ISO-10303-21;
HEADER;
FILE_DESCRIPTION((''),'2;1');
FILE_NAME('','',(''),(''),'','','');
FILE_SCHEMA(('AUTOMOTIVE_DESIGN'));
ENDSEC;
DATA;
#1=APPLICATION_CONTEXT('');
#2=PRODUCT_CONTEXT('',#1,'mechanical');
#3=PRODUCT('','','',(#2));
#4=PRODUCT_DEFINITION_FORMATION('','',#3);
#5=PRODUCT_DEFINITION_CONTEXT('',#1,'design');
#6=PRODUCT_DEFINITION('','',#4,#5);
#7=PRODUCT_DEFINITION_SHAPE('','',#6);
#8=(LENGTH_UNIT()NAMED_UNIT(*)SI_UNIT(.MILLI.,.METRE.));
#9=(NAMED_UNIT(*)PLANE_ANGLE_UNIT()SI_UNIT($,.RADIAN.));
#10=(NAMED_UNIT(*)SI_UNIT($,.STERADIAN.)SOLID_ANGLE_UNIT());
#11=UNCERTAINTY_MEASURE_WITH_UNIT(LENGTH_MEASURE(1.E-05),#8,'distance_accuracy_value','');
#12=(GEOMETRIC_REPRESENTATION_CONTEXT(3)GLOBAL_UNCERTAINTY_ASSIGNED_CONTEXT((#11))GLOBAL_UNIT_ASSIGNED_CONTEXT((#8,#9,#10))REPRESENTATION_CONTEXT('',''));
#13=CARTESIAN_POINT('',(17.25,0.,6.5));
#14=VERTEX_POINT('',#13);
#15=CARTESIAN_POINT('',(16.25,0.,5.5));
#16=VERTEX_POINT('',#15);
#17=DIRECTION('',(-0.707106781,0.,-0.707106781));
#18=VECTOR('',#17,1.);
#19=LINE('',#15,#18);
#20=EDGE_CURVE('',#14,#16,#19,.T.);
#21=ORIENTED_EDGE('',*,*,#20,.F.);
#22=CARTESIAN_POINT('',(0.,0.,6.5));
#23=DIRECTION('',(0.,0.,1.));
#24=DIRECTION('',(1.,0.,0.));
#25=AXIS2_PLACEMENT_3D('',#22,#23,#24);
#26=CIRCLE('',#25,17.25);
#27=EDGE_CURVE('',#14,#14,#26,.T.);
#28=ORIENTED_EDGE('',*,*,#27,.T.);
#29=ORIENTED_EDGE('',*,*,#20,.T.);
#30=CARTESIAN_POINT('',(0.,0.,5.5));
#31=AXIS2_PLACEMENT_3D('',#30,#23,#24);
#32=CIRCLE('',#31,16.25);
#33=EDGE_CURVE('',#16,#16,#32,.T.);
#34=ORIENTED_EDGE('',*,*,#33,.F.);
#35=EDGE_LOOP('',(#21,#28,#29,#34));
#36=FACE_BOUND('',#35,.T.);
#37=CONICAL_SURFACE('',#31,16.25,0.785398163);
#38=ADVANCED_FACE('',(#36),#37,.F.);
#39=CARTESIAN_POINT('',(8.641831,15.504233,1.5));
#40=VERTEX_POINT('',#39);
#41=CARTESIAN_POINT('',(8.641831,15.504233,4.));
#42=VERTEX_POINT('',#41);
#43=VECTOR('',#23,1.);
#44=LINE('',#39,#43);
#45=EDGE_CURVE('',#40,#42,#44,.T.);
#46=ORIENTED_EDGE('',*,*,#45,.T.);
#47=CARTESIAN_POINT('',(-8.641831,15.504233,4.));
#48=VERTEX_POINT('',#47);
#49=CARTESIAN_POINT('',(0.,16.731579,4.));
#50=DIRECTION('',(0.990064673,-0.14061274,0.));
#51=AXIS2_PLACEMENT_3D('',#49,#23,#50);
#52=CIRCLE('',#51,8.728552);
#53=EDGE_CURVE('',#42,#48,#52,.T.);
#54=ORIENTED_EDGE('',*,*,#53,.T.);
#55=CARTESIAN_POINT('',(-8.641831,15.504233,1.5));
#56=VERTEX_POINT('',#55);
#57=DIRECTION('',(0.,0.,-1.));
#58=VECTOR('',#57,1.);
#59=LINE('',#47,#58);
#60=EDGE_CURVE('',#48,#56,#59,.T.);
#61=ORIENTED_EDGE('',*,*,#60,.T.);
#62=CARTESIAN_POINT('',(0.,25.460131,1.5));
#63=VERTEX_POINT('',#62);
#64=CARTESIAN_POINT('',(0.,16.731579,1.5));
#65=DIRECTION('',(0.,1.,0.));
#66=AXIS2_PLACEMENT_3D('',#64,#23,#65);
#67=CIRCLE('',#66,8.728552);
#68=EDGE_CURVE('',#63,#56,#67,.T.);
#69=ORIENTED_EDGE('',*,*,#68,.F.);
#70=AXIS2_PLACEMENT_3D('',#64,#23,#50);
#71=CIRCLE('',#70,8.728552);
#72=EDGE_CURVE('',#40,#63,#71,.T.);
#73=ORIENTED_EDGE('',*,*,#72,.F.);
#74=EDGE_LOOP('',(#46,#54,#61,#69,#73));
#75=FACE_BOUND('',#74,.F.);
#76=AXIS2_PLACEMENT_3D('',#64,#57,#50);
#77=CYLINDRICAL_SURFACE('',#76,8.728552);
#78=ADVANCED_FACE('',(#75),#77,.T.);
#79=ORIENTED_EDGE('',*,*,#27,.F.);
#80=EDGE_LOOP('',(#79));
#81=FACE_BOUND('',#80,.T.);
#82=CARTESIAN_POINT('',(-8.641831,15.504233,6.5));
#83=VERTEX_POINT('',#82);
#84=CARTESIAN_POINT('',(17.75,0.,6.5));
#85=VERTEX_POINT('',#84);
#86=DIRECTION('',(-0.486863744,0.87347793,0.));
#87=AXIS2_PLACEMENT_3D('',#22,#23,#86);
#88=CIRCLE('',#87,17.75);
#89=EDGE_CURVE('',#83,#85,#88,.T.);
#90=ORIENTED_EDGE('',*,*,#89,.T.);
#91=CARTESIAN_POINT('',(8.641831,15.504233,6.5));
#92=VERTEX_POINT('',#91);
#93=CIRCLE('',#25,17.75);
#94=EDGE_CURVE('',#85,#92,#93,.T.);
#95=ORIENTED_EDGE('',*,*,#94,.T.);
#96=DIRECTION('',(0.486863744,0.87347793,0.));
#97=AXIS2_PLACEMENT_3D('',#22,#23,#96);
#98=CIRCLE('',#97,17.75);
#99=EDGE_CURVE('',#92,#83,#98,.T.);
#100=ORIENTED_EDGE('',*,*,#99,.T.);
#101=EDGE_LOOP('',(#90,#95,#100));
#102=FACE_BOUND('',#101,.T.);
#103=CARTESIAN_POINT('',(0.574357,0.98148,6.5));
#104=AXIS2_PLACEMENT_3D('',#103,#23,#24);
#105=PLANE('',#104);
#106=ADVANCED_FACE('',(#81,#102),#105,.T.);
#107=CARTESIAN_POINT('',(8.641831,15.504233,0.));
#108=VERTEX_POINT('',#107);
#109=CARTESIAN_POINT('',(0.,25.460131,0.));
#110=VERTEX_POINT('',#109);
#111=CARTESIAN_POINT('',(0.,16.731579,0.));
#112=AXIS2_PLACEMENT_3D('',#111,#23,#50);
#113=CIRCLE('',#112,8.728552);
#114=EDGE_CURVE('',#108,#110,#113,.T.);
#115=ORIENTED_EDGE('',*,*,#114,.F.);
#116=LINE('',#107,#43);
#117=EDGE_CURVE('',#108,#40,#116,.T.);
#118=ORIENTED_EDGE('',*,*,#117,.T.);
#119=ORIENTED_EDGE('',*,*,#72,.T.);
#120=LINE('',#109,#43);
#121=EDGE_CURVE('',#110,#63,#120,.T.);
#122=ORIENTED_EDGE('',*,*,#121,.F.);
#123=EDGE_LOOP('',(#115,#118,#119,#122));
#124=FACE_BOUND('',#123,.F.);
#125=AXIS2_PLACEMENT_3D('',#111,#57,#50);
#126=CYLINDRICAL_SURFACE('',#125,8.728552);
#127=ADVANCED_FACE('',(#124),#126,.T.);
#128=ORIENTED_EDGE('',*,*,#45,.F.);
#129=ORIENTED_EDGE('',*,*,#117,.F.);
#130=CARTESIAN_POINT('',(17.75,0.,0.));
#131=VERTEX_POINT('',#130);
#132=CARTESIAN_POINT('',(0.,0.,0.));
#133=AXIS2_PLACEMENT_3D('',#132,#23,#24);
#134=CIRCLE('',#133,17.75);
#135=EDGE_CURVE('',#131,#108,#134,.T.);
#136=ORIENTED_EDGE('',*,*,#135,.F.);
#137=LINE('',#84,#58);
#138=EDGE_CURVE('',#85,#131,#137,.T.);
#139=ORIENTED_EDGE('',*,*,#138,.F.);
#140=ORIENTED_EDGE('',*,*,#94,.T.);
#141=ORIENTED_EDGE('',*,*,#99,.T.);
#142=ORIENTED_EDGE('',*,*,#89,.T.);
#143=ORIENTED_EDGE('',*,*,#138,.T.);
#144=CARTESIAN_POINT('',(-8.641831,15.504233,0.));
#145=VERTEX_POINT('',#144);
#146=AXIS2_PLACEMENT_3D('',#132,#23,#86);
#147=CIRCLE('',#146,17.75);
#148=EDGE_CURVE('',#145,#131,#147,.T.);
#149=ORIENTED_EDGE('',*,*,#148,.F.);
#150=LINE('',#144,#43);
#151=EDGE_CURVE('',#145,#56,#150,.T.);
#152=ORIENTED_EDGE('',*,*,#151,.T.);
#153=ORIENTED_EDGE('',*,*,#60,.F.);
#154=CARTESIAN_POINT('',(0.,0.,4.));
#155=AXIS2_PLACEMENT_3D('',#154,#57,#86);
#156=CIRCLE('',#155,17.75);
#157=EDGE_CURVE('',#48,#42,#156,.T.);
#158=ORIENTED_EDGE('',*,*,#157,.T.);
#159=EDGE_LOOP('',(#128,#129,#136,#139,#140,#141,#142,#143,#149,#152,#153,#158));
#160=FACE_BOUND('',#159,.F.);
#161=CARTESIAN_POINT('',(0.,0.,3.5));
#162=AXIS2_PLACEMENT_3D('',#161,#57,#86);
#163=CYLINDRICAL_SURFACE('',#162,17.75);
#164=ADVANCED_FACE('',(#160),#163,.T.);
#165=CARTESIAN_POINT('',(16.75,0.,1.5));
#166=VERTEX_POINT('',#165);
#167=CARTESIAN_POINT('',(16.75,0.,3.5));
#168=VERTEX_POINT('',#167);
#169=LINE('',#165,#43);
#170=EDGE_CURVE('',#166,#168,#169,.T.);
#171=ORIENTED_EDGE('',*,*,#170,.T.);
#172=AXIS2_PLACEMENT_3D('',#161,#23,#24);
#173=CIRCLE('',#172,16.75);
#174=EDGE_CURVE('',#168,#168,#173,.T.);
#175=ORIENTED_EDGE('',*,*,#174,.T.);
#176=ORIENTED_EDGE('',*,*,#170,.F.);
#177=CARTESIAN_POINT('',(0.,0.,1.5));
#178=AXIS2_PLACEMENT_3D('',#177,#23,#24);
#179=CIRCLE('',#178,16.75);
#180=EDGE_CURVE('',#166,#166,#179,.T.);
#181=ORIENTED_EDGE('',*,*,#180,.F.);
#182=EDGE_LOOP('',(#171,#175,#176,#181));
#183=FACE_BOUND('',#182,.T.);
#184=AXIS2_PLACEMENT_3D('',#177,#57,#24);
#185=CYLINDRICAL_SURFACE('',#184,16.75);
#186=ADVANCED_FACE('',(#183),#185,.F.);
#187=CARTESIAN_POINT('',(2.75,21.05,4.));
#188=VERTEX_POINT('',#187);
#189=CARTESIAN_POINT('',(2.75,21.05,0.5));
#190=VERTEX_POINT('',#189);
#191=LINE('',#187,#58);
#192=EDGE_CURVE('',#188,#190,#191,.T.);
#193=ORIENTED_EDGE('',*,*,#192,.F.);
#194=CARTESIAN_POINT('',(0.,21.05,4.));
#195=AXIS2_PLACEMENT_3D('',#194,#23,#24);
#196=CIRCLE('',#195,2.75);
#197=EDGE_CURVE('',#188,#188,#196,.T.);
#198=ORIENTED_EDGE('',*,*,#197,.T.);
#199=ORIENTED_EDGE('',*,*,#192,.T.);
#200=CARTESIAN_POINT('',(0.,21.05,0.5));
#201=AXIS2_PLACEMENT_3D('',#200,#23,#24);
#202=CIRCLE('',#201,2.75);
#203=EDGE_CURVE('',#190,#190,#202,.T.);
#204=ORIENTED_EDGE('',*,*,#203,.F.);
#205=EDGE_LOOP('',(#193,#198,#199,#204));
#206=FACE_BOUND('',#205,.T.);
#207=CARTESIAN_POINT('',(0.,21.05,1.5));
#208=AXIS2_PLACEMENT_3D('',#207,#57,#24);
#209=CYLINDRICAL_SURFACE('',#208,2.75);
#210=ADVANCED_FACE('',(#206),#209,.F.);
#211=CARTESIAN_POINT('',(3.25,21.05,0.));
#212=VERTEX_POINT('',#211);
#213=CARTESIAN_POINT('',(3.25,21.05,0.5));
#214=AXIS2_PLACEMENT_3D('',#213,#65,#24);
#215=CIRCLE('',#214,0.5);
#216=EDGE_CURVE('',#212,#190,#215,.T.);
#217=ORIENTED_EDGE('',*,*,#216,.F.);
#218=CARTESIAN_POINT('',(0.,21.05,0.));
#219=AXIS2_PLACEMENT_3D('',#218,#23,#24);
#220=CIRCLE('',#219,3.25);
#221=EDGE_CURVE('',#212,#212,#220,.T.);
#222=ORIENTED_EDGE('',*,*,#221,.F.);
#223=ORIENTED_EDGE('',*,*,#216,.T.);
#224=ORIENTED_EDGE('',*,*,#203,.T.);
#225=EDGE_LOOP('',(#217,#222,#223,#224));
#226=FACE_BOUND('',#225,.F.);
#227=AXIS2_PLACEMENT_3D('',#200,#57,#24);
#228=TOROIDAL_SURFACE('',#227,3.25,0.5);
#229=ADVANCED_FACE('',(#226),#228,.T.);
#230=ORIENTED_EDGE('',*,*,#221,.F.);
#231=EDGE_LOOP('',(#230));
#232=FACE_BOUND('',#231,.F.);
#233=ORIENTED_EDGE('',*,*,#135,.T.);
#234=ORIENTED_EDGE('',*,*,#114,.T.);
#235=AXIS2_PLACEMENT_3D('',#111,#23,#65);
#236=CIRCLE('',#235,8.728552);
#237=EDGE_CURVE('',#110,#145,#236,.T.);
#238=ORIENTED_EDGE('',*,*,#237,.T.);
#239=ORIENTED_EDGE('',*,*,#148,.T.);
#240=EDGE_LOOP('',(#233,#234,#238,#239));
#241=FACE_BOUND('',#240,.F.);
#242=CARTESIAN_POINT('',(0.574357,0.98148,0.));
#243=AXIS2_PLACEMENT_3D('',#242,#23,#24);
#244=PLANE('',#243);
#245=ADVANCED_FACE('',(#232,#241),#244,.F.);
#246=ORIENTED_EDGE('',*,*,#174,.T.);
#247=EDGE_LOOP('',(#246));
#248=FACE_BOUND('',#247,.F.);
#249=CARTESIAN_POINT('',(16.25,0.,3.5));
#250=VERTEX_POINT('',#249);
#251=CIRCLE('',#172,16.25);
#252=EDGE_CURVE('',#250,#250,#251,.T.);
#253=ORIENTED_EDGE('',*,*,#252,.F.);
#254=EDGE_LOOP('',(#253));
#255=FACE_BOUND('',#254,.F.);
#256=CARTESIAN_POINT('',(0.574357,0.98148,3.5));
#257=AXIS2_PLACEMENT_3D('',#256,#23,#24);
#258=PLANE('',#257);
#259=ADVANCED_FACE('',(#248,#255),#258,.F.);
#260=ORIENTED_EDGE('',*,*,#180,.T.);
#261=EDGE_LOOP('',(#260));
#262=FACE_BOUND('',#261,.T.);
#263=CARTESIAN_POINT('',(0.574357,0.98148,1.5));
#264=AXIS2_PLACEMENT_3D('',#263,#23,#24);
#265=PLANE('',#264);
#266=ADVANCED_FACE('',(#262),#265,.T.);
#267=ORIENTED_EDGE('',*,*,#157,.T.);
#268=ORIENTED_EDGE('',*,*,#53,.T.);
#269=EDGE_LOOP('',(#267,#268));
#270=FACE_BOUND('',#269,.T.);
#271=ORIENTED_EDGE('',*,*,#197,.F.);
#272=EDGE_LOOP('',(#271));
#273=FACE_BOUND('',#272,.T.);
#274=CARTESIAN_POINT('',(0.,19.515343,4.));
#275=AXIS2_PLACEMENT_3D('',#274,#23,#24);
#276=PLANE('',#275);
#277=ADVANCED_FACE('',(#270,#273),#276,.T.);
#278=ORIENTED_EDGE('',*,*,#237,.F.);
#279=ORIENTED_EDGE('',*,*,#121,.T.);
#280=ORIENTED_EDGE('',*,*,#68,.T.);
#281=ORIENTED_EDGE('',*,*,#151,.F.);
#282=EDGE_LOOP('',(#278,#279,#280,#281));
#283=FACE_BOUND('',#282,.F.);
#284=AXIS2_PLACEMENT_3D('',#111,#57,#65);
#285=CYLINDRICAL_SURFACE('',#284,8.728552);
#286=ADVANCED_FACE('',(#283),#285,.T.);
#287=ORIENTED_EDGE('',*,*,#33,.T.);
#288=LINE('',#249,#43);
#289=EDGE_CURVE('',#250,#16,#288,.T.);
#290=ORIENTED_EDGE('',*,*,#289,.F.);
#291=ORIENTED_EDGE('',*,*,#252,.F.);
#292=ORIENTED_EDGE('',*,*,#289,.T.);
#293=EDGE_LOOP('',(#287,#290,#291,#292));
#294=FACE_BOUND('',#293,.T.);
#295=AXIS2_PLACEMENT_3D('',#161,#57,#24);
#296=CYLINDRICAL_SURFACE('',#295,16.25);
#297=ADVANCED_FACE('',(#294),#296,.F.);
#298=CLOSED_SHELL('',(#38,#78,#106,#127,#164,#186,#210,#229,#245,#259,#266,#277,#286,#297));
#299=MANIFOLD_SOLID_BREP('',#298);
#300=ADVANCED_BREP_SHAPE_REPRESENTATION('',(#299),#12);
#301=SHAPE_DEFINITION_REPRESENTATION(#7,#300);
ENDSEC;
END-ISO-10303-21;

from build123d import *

# Parameters (mm, degrees)
F0_R     = 2.75
F1_DEPTH = 1.5
F2_R     = 16.75
F3_DEPTH = 2
F2_R_2   = 2.75
F5_DEPTH = 2.5
F6_R     = 16.75
F6_R_2   = 16.25
F7_DEPTH = 3
F8_SIZE  = 1
F9_R     = 0.5


# Not quite as in the source:
# - a feature names something its author has since deleted; it is built from what else it names


with BuildPart() as f1:
    # F0 (on Top) → F1 (new body)
    with BuildSketch(Plane.XY):
        with BuildLine():
            ThreePointArc((-8.6418314576, 15.5042332625), (-8.9908284276, -15.3044929412), (17.75, 0))
            ThreePointArc((17.75, 0), (15.3044929412, 8.9908284276), (8.6418314576, 15.5042332625))
            ThreePointArc((8.6418314576, 15.5042332625), (0, 17.75), (-8.6418314576, 15.5042332625))
        make_face()
        with BuildLine():
            ThreePointArc((-8.6418314576, 15.5042332625), (0, 17.75), (8.6418314576, 15.5042332625))
            ThreePointArc((8.6418314576, 15.5042332625), (6.5916833801, 22.4532341762), (0, 25.4601314234))
            ThreePointArc((0, 25.4601314234), (-6.5916833801, 22.4532341762), (-8.6418314576, 15.5042332625))
        make_face()
        with Locations((0, 21.05)):
            Circle(F0_R, mode=Mode.SUBTRACT)
    extrude(amount=F1_DEPTH)

    # F2 (on face) → F3 (join)
    with BuildSketch(Plane.XY.offset(1.5)):
        with BuildLine():
            ThreePointArc((-8.6418314576, 15.5042332625), (-8.9908284276, -15.3044929412), (17.75, 0))
            ThreePointArc((17.75, 0), (15.3044929412, 8.9908284276), (8.6418314576, 15.5042332625))
            ThreePointArc((8.6418314576, 15.5042332625), (0, 17.75), (-8.6418314576, 15.5042332625))
        make_face()
        Circle(F2_R, mode=Mode.SUBTRACT)
    extrude(amount=F3_DEPTH)

    # F2 (on face) → F5 (join)
    with BuildSketch(Plane.XY.offset(1.5)):
        with BuildLine():
            ThreePointArc((-8.6418314576, 15.5042332625), (0, 17.75), (8.6418314576, 15.5042332625))
            ThreePointArc((8.6418314576, 15.5042332625), (0, 25.4601314234), (-8.6418314576, 15.5042332625))
        make_face()
        with Locations((0, 21.05)):
            Circle(F2_R_2, mode=Mode.SUBTRACT)
    extrude(amount=F5_DEPTH)

    # F6 (on face) → F7 (join)
    with BuildSketch(Plane.XY.offset(3.5)):
        with BuildLine():
            ThreePointArc((-8.6418314576, 15.5042332625), (-8.9908284276, -15.3044929412), (17.75, 0))
            ThreePointArc((17.75, 0), (15.3044929412, 8.9908284276), (8.6418314576, 15.5042332625))
            ThreePointArc((8.6418314576, 15.5042332625), (0, 17.75), (-8.6418314576, 15.5042332625))
        make_face()
        Circle(F6_R, mode=Mode.SUBTRACT)
        Circle(F6_R)
        Circle(F6_R_2, mode=Mode.SUBTRACT)
    extrude(amount=F7_DEPTH)

    # F8
    f8_edges = [f1.edges().sort_by_distance(p)[0] for p in [
        (-16.25, 0, 6.5),
    ]]
    chamfer(f8_edges, length=F8_SIZE)

    # F9
    f9_edges = [f1.edges().sort_by_distance(p)[0] for p in [
        (-2.75, 21.05, 0),
    ]]
    fillet(f9_edges, radius=F9_R)


solid = f1.part
